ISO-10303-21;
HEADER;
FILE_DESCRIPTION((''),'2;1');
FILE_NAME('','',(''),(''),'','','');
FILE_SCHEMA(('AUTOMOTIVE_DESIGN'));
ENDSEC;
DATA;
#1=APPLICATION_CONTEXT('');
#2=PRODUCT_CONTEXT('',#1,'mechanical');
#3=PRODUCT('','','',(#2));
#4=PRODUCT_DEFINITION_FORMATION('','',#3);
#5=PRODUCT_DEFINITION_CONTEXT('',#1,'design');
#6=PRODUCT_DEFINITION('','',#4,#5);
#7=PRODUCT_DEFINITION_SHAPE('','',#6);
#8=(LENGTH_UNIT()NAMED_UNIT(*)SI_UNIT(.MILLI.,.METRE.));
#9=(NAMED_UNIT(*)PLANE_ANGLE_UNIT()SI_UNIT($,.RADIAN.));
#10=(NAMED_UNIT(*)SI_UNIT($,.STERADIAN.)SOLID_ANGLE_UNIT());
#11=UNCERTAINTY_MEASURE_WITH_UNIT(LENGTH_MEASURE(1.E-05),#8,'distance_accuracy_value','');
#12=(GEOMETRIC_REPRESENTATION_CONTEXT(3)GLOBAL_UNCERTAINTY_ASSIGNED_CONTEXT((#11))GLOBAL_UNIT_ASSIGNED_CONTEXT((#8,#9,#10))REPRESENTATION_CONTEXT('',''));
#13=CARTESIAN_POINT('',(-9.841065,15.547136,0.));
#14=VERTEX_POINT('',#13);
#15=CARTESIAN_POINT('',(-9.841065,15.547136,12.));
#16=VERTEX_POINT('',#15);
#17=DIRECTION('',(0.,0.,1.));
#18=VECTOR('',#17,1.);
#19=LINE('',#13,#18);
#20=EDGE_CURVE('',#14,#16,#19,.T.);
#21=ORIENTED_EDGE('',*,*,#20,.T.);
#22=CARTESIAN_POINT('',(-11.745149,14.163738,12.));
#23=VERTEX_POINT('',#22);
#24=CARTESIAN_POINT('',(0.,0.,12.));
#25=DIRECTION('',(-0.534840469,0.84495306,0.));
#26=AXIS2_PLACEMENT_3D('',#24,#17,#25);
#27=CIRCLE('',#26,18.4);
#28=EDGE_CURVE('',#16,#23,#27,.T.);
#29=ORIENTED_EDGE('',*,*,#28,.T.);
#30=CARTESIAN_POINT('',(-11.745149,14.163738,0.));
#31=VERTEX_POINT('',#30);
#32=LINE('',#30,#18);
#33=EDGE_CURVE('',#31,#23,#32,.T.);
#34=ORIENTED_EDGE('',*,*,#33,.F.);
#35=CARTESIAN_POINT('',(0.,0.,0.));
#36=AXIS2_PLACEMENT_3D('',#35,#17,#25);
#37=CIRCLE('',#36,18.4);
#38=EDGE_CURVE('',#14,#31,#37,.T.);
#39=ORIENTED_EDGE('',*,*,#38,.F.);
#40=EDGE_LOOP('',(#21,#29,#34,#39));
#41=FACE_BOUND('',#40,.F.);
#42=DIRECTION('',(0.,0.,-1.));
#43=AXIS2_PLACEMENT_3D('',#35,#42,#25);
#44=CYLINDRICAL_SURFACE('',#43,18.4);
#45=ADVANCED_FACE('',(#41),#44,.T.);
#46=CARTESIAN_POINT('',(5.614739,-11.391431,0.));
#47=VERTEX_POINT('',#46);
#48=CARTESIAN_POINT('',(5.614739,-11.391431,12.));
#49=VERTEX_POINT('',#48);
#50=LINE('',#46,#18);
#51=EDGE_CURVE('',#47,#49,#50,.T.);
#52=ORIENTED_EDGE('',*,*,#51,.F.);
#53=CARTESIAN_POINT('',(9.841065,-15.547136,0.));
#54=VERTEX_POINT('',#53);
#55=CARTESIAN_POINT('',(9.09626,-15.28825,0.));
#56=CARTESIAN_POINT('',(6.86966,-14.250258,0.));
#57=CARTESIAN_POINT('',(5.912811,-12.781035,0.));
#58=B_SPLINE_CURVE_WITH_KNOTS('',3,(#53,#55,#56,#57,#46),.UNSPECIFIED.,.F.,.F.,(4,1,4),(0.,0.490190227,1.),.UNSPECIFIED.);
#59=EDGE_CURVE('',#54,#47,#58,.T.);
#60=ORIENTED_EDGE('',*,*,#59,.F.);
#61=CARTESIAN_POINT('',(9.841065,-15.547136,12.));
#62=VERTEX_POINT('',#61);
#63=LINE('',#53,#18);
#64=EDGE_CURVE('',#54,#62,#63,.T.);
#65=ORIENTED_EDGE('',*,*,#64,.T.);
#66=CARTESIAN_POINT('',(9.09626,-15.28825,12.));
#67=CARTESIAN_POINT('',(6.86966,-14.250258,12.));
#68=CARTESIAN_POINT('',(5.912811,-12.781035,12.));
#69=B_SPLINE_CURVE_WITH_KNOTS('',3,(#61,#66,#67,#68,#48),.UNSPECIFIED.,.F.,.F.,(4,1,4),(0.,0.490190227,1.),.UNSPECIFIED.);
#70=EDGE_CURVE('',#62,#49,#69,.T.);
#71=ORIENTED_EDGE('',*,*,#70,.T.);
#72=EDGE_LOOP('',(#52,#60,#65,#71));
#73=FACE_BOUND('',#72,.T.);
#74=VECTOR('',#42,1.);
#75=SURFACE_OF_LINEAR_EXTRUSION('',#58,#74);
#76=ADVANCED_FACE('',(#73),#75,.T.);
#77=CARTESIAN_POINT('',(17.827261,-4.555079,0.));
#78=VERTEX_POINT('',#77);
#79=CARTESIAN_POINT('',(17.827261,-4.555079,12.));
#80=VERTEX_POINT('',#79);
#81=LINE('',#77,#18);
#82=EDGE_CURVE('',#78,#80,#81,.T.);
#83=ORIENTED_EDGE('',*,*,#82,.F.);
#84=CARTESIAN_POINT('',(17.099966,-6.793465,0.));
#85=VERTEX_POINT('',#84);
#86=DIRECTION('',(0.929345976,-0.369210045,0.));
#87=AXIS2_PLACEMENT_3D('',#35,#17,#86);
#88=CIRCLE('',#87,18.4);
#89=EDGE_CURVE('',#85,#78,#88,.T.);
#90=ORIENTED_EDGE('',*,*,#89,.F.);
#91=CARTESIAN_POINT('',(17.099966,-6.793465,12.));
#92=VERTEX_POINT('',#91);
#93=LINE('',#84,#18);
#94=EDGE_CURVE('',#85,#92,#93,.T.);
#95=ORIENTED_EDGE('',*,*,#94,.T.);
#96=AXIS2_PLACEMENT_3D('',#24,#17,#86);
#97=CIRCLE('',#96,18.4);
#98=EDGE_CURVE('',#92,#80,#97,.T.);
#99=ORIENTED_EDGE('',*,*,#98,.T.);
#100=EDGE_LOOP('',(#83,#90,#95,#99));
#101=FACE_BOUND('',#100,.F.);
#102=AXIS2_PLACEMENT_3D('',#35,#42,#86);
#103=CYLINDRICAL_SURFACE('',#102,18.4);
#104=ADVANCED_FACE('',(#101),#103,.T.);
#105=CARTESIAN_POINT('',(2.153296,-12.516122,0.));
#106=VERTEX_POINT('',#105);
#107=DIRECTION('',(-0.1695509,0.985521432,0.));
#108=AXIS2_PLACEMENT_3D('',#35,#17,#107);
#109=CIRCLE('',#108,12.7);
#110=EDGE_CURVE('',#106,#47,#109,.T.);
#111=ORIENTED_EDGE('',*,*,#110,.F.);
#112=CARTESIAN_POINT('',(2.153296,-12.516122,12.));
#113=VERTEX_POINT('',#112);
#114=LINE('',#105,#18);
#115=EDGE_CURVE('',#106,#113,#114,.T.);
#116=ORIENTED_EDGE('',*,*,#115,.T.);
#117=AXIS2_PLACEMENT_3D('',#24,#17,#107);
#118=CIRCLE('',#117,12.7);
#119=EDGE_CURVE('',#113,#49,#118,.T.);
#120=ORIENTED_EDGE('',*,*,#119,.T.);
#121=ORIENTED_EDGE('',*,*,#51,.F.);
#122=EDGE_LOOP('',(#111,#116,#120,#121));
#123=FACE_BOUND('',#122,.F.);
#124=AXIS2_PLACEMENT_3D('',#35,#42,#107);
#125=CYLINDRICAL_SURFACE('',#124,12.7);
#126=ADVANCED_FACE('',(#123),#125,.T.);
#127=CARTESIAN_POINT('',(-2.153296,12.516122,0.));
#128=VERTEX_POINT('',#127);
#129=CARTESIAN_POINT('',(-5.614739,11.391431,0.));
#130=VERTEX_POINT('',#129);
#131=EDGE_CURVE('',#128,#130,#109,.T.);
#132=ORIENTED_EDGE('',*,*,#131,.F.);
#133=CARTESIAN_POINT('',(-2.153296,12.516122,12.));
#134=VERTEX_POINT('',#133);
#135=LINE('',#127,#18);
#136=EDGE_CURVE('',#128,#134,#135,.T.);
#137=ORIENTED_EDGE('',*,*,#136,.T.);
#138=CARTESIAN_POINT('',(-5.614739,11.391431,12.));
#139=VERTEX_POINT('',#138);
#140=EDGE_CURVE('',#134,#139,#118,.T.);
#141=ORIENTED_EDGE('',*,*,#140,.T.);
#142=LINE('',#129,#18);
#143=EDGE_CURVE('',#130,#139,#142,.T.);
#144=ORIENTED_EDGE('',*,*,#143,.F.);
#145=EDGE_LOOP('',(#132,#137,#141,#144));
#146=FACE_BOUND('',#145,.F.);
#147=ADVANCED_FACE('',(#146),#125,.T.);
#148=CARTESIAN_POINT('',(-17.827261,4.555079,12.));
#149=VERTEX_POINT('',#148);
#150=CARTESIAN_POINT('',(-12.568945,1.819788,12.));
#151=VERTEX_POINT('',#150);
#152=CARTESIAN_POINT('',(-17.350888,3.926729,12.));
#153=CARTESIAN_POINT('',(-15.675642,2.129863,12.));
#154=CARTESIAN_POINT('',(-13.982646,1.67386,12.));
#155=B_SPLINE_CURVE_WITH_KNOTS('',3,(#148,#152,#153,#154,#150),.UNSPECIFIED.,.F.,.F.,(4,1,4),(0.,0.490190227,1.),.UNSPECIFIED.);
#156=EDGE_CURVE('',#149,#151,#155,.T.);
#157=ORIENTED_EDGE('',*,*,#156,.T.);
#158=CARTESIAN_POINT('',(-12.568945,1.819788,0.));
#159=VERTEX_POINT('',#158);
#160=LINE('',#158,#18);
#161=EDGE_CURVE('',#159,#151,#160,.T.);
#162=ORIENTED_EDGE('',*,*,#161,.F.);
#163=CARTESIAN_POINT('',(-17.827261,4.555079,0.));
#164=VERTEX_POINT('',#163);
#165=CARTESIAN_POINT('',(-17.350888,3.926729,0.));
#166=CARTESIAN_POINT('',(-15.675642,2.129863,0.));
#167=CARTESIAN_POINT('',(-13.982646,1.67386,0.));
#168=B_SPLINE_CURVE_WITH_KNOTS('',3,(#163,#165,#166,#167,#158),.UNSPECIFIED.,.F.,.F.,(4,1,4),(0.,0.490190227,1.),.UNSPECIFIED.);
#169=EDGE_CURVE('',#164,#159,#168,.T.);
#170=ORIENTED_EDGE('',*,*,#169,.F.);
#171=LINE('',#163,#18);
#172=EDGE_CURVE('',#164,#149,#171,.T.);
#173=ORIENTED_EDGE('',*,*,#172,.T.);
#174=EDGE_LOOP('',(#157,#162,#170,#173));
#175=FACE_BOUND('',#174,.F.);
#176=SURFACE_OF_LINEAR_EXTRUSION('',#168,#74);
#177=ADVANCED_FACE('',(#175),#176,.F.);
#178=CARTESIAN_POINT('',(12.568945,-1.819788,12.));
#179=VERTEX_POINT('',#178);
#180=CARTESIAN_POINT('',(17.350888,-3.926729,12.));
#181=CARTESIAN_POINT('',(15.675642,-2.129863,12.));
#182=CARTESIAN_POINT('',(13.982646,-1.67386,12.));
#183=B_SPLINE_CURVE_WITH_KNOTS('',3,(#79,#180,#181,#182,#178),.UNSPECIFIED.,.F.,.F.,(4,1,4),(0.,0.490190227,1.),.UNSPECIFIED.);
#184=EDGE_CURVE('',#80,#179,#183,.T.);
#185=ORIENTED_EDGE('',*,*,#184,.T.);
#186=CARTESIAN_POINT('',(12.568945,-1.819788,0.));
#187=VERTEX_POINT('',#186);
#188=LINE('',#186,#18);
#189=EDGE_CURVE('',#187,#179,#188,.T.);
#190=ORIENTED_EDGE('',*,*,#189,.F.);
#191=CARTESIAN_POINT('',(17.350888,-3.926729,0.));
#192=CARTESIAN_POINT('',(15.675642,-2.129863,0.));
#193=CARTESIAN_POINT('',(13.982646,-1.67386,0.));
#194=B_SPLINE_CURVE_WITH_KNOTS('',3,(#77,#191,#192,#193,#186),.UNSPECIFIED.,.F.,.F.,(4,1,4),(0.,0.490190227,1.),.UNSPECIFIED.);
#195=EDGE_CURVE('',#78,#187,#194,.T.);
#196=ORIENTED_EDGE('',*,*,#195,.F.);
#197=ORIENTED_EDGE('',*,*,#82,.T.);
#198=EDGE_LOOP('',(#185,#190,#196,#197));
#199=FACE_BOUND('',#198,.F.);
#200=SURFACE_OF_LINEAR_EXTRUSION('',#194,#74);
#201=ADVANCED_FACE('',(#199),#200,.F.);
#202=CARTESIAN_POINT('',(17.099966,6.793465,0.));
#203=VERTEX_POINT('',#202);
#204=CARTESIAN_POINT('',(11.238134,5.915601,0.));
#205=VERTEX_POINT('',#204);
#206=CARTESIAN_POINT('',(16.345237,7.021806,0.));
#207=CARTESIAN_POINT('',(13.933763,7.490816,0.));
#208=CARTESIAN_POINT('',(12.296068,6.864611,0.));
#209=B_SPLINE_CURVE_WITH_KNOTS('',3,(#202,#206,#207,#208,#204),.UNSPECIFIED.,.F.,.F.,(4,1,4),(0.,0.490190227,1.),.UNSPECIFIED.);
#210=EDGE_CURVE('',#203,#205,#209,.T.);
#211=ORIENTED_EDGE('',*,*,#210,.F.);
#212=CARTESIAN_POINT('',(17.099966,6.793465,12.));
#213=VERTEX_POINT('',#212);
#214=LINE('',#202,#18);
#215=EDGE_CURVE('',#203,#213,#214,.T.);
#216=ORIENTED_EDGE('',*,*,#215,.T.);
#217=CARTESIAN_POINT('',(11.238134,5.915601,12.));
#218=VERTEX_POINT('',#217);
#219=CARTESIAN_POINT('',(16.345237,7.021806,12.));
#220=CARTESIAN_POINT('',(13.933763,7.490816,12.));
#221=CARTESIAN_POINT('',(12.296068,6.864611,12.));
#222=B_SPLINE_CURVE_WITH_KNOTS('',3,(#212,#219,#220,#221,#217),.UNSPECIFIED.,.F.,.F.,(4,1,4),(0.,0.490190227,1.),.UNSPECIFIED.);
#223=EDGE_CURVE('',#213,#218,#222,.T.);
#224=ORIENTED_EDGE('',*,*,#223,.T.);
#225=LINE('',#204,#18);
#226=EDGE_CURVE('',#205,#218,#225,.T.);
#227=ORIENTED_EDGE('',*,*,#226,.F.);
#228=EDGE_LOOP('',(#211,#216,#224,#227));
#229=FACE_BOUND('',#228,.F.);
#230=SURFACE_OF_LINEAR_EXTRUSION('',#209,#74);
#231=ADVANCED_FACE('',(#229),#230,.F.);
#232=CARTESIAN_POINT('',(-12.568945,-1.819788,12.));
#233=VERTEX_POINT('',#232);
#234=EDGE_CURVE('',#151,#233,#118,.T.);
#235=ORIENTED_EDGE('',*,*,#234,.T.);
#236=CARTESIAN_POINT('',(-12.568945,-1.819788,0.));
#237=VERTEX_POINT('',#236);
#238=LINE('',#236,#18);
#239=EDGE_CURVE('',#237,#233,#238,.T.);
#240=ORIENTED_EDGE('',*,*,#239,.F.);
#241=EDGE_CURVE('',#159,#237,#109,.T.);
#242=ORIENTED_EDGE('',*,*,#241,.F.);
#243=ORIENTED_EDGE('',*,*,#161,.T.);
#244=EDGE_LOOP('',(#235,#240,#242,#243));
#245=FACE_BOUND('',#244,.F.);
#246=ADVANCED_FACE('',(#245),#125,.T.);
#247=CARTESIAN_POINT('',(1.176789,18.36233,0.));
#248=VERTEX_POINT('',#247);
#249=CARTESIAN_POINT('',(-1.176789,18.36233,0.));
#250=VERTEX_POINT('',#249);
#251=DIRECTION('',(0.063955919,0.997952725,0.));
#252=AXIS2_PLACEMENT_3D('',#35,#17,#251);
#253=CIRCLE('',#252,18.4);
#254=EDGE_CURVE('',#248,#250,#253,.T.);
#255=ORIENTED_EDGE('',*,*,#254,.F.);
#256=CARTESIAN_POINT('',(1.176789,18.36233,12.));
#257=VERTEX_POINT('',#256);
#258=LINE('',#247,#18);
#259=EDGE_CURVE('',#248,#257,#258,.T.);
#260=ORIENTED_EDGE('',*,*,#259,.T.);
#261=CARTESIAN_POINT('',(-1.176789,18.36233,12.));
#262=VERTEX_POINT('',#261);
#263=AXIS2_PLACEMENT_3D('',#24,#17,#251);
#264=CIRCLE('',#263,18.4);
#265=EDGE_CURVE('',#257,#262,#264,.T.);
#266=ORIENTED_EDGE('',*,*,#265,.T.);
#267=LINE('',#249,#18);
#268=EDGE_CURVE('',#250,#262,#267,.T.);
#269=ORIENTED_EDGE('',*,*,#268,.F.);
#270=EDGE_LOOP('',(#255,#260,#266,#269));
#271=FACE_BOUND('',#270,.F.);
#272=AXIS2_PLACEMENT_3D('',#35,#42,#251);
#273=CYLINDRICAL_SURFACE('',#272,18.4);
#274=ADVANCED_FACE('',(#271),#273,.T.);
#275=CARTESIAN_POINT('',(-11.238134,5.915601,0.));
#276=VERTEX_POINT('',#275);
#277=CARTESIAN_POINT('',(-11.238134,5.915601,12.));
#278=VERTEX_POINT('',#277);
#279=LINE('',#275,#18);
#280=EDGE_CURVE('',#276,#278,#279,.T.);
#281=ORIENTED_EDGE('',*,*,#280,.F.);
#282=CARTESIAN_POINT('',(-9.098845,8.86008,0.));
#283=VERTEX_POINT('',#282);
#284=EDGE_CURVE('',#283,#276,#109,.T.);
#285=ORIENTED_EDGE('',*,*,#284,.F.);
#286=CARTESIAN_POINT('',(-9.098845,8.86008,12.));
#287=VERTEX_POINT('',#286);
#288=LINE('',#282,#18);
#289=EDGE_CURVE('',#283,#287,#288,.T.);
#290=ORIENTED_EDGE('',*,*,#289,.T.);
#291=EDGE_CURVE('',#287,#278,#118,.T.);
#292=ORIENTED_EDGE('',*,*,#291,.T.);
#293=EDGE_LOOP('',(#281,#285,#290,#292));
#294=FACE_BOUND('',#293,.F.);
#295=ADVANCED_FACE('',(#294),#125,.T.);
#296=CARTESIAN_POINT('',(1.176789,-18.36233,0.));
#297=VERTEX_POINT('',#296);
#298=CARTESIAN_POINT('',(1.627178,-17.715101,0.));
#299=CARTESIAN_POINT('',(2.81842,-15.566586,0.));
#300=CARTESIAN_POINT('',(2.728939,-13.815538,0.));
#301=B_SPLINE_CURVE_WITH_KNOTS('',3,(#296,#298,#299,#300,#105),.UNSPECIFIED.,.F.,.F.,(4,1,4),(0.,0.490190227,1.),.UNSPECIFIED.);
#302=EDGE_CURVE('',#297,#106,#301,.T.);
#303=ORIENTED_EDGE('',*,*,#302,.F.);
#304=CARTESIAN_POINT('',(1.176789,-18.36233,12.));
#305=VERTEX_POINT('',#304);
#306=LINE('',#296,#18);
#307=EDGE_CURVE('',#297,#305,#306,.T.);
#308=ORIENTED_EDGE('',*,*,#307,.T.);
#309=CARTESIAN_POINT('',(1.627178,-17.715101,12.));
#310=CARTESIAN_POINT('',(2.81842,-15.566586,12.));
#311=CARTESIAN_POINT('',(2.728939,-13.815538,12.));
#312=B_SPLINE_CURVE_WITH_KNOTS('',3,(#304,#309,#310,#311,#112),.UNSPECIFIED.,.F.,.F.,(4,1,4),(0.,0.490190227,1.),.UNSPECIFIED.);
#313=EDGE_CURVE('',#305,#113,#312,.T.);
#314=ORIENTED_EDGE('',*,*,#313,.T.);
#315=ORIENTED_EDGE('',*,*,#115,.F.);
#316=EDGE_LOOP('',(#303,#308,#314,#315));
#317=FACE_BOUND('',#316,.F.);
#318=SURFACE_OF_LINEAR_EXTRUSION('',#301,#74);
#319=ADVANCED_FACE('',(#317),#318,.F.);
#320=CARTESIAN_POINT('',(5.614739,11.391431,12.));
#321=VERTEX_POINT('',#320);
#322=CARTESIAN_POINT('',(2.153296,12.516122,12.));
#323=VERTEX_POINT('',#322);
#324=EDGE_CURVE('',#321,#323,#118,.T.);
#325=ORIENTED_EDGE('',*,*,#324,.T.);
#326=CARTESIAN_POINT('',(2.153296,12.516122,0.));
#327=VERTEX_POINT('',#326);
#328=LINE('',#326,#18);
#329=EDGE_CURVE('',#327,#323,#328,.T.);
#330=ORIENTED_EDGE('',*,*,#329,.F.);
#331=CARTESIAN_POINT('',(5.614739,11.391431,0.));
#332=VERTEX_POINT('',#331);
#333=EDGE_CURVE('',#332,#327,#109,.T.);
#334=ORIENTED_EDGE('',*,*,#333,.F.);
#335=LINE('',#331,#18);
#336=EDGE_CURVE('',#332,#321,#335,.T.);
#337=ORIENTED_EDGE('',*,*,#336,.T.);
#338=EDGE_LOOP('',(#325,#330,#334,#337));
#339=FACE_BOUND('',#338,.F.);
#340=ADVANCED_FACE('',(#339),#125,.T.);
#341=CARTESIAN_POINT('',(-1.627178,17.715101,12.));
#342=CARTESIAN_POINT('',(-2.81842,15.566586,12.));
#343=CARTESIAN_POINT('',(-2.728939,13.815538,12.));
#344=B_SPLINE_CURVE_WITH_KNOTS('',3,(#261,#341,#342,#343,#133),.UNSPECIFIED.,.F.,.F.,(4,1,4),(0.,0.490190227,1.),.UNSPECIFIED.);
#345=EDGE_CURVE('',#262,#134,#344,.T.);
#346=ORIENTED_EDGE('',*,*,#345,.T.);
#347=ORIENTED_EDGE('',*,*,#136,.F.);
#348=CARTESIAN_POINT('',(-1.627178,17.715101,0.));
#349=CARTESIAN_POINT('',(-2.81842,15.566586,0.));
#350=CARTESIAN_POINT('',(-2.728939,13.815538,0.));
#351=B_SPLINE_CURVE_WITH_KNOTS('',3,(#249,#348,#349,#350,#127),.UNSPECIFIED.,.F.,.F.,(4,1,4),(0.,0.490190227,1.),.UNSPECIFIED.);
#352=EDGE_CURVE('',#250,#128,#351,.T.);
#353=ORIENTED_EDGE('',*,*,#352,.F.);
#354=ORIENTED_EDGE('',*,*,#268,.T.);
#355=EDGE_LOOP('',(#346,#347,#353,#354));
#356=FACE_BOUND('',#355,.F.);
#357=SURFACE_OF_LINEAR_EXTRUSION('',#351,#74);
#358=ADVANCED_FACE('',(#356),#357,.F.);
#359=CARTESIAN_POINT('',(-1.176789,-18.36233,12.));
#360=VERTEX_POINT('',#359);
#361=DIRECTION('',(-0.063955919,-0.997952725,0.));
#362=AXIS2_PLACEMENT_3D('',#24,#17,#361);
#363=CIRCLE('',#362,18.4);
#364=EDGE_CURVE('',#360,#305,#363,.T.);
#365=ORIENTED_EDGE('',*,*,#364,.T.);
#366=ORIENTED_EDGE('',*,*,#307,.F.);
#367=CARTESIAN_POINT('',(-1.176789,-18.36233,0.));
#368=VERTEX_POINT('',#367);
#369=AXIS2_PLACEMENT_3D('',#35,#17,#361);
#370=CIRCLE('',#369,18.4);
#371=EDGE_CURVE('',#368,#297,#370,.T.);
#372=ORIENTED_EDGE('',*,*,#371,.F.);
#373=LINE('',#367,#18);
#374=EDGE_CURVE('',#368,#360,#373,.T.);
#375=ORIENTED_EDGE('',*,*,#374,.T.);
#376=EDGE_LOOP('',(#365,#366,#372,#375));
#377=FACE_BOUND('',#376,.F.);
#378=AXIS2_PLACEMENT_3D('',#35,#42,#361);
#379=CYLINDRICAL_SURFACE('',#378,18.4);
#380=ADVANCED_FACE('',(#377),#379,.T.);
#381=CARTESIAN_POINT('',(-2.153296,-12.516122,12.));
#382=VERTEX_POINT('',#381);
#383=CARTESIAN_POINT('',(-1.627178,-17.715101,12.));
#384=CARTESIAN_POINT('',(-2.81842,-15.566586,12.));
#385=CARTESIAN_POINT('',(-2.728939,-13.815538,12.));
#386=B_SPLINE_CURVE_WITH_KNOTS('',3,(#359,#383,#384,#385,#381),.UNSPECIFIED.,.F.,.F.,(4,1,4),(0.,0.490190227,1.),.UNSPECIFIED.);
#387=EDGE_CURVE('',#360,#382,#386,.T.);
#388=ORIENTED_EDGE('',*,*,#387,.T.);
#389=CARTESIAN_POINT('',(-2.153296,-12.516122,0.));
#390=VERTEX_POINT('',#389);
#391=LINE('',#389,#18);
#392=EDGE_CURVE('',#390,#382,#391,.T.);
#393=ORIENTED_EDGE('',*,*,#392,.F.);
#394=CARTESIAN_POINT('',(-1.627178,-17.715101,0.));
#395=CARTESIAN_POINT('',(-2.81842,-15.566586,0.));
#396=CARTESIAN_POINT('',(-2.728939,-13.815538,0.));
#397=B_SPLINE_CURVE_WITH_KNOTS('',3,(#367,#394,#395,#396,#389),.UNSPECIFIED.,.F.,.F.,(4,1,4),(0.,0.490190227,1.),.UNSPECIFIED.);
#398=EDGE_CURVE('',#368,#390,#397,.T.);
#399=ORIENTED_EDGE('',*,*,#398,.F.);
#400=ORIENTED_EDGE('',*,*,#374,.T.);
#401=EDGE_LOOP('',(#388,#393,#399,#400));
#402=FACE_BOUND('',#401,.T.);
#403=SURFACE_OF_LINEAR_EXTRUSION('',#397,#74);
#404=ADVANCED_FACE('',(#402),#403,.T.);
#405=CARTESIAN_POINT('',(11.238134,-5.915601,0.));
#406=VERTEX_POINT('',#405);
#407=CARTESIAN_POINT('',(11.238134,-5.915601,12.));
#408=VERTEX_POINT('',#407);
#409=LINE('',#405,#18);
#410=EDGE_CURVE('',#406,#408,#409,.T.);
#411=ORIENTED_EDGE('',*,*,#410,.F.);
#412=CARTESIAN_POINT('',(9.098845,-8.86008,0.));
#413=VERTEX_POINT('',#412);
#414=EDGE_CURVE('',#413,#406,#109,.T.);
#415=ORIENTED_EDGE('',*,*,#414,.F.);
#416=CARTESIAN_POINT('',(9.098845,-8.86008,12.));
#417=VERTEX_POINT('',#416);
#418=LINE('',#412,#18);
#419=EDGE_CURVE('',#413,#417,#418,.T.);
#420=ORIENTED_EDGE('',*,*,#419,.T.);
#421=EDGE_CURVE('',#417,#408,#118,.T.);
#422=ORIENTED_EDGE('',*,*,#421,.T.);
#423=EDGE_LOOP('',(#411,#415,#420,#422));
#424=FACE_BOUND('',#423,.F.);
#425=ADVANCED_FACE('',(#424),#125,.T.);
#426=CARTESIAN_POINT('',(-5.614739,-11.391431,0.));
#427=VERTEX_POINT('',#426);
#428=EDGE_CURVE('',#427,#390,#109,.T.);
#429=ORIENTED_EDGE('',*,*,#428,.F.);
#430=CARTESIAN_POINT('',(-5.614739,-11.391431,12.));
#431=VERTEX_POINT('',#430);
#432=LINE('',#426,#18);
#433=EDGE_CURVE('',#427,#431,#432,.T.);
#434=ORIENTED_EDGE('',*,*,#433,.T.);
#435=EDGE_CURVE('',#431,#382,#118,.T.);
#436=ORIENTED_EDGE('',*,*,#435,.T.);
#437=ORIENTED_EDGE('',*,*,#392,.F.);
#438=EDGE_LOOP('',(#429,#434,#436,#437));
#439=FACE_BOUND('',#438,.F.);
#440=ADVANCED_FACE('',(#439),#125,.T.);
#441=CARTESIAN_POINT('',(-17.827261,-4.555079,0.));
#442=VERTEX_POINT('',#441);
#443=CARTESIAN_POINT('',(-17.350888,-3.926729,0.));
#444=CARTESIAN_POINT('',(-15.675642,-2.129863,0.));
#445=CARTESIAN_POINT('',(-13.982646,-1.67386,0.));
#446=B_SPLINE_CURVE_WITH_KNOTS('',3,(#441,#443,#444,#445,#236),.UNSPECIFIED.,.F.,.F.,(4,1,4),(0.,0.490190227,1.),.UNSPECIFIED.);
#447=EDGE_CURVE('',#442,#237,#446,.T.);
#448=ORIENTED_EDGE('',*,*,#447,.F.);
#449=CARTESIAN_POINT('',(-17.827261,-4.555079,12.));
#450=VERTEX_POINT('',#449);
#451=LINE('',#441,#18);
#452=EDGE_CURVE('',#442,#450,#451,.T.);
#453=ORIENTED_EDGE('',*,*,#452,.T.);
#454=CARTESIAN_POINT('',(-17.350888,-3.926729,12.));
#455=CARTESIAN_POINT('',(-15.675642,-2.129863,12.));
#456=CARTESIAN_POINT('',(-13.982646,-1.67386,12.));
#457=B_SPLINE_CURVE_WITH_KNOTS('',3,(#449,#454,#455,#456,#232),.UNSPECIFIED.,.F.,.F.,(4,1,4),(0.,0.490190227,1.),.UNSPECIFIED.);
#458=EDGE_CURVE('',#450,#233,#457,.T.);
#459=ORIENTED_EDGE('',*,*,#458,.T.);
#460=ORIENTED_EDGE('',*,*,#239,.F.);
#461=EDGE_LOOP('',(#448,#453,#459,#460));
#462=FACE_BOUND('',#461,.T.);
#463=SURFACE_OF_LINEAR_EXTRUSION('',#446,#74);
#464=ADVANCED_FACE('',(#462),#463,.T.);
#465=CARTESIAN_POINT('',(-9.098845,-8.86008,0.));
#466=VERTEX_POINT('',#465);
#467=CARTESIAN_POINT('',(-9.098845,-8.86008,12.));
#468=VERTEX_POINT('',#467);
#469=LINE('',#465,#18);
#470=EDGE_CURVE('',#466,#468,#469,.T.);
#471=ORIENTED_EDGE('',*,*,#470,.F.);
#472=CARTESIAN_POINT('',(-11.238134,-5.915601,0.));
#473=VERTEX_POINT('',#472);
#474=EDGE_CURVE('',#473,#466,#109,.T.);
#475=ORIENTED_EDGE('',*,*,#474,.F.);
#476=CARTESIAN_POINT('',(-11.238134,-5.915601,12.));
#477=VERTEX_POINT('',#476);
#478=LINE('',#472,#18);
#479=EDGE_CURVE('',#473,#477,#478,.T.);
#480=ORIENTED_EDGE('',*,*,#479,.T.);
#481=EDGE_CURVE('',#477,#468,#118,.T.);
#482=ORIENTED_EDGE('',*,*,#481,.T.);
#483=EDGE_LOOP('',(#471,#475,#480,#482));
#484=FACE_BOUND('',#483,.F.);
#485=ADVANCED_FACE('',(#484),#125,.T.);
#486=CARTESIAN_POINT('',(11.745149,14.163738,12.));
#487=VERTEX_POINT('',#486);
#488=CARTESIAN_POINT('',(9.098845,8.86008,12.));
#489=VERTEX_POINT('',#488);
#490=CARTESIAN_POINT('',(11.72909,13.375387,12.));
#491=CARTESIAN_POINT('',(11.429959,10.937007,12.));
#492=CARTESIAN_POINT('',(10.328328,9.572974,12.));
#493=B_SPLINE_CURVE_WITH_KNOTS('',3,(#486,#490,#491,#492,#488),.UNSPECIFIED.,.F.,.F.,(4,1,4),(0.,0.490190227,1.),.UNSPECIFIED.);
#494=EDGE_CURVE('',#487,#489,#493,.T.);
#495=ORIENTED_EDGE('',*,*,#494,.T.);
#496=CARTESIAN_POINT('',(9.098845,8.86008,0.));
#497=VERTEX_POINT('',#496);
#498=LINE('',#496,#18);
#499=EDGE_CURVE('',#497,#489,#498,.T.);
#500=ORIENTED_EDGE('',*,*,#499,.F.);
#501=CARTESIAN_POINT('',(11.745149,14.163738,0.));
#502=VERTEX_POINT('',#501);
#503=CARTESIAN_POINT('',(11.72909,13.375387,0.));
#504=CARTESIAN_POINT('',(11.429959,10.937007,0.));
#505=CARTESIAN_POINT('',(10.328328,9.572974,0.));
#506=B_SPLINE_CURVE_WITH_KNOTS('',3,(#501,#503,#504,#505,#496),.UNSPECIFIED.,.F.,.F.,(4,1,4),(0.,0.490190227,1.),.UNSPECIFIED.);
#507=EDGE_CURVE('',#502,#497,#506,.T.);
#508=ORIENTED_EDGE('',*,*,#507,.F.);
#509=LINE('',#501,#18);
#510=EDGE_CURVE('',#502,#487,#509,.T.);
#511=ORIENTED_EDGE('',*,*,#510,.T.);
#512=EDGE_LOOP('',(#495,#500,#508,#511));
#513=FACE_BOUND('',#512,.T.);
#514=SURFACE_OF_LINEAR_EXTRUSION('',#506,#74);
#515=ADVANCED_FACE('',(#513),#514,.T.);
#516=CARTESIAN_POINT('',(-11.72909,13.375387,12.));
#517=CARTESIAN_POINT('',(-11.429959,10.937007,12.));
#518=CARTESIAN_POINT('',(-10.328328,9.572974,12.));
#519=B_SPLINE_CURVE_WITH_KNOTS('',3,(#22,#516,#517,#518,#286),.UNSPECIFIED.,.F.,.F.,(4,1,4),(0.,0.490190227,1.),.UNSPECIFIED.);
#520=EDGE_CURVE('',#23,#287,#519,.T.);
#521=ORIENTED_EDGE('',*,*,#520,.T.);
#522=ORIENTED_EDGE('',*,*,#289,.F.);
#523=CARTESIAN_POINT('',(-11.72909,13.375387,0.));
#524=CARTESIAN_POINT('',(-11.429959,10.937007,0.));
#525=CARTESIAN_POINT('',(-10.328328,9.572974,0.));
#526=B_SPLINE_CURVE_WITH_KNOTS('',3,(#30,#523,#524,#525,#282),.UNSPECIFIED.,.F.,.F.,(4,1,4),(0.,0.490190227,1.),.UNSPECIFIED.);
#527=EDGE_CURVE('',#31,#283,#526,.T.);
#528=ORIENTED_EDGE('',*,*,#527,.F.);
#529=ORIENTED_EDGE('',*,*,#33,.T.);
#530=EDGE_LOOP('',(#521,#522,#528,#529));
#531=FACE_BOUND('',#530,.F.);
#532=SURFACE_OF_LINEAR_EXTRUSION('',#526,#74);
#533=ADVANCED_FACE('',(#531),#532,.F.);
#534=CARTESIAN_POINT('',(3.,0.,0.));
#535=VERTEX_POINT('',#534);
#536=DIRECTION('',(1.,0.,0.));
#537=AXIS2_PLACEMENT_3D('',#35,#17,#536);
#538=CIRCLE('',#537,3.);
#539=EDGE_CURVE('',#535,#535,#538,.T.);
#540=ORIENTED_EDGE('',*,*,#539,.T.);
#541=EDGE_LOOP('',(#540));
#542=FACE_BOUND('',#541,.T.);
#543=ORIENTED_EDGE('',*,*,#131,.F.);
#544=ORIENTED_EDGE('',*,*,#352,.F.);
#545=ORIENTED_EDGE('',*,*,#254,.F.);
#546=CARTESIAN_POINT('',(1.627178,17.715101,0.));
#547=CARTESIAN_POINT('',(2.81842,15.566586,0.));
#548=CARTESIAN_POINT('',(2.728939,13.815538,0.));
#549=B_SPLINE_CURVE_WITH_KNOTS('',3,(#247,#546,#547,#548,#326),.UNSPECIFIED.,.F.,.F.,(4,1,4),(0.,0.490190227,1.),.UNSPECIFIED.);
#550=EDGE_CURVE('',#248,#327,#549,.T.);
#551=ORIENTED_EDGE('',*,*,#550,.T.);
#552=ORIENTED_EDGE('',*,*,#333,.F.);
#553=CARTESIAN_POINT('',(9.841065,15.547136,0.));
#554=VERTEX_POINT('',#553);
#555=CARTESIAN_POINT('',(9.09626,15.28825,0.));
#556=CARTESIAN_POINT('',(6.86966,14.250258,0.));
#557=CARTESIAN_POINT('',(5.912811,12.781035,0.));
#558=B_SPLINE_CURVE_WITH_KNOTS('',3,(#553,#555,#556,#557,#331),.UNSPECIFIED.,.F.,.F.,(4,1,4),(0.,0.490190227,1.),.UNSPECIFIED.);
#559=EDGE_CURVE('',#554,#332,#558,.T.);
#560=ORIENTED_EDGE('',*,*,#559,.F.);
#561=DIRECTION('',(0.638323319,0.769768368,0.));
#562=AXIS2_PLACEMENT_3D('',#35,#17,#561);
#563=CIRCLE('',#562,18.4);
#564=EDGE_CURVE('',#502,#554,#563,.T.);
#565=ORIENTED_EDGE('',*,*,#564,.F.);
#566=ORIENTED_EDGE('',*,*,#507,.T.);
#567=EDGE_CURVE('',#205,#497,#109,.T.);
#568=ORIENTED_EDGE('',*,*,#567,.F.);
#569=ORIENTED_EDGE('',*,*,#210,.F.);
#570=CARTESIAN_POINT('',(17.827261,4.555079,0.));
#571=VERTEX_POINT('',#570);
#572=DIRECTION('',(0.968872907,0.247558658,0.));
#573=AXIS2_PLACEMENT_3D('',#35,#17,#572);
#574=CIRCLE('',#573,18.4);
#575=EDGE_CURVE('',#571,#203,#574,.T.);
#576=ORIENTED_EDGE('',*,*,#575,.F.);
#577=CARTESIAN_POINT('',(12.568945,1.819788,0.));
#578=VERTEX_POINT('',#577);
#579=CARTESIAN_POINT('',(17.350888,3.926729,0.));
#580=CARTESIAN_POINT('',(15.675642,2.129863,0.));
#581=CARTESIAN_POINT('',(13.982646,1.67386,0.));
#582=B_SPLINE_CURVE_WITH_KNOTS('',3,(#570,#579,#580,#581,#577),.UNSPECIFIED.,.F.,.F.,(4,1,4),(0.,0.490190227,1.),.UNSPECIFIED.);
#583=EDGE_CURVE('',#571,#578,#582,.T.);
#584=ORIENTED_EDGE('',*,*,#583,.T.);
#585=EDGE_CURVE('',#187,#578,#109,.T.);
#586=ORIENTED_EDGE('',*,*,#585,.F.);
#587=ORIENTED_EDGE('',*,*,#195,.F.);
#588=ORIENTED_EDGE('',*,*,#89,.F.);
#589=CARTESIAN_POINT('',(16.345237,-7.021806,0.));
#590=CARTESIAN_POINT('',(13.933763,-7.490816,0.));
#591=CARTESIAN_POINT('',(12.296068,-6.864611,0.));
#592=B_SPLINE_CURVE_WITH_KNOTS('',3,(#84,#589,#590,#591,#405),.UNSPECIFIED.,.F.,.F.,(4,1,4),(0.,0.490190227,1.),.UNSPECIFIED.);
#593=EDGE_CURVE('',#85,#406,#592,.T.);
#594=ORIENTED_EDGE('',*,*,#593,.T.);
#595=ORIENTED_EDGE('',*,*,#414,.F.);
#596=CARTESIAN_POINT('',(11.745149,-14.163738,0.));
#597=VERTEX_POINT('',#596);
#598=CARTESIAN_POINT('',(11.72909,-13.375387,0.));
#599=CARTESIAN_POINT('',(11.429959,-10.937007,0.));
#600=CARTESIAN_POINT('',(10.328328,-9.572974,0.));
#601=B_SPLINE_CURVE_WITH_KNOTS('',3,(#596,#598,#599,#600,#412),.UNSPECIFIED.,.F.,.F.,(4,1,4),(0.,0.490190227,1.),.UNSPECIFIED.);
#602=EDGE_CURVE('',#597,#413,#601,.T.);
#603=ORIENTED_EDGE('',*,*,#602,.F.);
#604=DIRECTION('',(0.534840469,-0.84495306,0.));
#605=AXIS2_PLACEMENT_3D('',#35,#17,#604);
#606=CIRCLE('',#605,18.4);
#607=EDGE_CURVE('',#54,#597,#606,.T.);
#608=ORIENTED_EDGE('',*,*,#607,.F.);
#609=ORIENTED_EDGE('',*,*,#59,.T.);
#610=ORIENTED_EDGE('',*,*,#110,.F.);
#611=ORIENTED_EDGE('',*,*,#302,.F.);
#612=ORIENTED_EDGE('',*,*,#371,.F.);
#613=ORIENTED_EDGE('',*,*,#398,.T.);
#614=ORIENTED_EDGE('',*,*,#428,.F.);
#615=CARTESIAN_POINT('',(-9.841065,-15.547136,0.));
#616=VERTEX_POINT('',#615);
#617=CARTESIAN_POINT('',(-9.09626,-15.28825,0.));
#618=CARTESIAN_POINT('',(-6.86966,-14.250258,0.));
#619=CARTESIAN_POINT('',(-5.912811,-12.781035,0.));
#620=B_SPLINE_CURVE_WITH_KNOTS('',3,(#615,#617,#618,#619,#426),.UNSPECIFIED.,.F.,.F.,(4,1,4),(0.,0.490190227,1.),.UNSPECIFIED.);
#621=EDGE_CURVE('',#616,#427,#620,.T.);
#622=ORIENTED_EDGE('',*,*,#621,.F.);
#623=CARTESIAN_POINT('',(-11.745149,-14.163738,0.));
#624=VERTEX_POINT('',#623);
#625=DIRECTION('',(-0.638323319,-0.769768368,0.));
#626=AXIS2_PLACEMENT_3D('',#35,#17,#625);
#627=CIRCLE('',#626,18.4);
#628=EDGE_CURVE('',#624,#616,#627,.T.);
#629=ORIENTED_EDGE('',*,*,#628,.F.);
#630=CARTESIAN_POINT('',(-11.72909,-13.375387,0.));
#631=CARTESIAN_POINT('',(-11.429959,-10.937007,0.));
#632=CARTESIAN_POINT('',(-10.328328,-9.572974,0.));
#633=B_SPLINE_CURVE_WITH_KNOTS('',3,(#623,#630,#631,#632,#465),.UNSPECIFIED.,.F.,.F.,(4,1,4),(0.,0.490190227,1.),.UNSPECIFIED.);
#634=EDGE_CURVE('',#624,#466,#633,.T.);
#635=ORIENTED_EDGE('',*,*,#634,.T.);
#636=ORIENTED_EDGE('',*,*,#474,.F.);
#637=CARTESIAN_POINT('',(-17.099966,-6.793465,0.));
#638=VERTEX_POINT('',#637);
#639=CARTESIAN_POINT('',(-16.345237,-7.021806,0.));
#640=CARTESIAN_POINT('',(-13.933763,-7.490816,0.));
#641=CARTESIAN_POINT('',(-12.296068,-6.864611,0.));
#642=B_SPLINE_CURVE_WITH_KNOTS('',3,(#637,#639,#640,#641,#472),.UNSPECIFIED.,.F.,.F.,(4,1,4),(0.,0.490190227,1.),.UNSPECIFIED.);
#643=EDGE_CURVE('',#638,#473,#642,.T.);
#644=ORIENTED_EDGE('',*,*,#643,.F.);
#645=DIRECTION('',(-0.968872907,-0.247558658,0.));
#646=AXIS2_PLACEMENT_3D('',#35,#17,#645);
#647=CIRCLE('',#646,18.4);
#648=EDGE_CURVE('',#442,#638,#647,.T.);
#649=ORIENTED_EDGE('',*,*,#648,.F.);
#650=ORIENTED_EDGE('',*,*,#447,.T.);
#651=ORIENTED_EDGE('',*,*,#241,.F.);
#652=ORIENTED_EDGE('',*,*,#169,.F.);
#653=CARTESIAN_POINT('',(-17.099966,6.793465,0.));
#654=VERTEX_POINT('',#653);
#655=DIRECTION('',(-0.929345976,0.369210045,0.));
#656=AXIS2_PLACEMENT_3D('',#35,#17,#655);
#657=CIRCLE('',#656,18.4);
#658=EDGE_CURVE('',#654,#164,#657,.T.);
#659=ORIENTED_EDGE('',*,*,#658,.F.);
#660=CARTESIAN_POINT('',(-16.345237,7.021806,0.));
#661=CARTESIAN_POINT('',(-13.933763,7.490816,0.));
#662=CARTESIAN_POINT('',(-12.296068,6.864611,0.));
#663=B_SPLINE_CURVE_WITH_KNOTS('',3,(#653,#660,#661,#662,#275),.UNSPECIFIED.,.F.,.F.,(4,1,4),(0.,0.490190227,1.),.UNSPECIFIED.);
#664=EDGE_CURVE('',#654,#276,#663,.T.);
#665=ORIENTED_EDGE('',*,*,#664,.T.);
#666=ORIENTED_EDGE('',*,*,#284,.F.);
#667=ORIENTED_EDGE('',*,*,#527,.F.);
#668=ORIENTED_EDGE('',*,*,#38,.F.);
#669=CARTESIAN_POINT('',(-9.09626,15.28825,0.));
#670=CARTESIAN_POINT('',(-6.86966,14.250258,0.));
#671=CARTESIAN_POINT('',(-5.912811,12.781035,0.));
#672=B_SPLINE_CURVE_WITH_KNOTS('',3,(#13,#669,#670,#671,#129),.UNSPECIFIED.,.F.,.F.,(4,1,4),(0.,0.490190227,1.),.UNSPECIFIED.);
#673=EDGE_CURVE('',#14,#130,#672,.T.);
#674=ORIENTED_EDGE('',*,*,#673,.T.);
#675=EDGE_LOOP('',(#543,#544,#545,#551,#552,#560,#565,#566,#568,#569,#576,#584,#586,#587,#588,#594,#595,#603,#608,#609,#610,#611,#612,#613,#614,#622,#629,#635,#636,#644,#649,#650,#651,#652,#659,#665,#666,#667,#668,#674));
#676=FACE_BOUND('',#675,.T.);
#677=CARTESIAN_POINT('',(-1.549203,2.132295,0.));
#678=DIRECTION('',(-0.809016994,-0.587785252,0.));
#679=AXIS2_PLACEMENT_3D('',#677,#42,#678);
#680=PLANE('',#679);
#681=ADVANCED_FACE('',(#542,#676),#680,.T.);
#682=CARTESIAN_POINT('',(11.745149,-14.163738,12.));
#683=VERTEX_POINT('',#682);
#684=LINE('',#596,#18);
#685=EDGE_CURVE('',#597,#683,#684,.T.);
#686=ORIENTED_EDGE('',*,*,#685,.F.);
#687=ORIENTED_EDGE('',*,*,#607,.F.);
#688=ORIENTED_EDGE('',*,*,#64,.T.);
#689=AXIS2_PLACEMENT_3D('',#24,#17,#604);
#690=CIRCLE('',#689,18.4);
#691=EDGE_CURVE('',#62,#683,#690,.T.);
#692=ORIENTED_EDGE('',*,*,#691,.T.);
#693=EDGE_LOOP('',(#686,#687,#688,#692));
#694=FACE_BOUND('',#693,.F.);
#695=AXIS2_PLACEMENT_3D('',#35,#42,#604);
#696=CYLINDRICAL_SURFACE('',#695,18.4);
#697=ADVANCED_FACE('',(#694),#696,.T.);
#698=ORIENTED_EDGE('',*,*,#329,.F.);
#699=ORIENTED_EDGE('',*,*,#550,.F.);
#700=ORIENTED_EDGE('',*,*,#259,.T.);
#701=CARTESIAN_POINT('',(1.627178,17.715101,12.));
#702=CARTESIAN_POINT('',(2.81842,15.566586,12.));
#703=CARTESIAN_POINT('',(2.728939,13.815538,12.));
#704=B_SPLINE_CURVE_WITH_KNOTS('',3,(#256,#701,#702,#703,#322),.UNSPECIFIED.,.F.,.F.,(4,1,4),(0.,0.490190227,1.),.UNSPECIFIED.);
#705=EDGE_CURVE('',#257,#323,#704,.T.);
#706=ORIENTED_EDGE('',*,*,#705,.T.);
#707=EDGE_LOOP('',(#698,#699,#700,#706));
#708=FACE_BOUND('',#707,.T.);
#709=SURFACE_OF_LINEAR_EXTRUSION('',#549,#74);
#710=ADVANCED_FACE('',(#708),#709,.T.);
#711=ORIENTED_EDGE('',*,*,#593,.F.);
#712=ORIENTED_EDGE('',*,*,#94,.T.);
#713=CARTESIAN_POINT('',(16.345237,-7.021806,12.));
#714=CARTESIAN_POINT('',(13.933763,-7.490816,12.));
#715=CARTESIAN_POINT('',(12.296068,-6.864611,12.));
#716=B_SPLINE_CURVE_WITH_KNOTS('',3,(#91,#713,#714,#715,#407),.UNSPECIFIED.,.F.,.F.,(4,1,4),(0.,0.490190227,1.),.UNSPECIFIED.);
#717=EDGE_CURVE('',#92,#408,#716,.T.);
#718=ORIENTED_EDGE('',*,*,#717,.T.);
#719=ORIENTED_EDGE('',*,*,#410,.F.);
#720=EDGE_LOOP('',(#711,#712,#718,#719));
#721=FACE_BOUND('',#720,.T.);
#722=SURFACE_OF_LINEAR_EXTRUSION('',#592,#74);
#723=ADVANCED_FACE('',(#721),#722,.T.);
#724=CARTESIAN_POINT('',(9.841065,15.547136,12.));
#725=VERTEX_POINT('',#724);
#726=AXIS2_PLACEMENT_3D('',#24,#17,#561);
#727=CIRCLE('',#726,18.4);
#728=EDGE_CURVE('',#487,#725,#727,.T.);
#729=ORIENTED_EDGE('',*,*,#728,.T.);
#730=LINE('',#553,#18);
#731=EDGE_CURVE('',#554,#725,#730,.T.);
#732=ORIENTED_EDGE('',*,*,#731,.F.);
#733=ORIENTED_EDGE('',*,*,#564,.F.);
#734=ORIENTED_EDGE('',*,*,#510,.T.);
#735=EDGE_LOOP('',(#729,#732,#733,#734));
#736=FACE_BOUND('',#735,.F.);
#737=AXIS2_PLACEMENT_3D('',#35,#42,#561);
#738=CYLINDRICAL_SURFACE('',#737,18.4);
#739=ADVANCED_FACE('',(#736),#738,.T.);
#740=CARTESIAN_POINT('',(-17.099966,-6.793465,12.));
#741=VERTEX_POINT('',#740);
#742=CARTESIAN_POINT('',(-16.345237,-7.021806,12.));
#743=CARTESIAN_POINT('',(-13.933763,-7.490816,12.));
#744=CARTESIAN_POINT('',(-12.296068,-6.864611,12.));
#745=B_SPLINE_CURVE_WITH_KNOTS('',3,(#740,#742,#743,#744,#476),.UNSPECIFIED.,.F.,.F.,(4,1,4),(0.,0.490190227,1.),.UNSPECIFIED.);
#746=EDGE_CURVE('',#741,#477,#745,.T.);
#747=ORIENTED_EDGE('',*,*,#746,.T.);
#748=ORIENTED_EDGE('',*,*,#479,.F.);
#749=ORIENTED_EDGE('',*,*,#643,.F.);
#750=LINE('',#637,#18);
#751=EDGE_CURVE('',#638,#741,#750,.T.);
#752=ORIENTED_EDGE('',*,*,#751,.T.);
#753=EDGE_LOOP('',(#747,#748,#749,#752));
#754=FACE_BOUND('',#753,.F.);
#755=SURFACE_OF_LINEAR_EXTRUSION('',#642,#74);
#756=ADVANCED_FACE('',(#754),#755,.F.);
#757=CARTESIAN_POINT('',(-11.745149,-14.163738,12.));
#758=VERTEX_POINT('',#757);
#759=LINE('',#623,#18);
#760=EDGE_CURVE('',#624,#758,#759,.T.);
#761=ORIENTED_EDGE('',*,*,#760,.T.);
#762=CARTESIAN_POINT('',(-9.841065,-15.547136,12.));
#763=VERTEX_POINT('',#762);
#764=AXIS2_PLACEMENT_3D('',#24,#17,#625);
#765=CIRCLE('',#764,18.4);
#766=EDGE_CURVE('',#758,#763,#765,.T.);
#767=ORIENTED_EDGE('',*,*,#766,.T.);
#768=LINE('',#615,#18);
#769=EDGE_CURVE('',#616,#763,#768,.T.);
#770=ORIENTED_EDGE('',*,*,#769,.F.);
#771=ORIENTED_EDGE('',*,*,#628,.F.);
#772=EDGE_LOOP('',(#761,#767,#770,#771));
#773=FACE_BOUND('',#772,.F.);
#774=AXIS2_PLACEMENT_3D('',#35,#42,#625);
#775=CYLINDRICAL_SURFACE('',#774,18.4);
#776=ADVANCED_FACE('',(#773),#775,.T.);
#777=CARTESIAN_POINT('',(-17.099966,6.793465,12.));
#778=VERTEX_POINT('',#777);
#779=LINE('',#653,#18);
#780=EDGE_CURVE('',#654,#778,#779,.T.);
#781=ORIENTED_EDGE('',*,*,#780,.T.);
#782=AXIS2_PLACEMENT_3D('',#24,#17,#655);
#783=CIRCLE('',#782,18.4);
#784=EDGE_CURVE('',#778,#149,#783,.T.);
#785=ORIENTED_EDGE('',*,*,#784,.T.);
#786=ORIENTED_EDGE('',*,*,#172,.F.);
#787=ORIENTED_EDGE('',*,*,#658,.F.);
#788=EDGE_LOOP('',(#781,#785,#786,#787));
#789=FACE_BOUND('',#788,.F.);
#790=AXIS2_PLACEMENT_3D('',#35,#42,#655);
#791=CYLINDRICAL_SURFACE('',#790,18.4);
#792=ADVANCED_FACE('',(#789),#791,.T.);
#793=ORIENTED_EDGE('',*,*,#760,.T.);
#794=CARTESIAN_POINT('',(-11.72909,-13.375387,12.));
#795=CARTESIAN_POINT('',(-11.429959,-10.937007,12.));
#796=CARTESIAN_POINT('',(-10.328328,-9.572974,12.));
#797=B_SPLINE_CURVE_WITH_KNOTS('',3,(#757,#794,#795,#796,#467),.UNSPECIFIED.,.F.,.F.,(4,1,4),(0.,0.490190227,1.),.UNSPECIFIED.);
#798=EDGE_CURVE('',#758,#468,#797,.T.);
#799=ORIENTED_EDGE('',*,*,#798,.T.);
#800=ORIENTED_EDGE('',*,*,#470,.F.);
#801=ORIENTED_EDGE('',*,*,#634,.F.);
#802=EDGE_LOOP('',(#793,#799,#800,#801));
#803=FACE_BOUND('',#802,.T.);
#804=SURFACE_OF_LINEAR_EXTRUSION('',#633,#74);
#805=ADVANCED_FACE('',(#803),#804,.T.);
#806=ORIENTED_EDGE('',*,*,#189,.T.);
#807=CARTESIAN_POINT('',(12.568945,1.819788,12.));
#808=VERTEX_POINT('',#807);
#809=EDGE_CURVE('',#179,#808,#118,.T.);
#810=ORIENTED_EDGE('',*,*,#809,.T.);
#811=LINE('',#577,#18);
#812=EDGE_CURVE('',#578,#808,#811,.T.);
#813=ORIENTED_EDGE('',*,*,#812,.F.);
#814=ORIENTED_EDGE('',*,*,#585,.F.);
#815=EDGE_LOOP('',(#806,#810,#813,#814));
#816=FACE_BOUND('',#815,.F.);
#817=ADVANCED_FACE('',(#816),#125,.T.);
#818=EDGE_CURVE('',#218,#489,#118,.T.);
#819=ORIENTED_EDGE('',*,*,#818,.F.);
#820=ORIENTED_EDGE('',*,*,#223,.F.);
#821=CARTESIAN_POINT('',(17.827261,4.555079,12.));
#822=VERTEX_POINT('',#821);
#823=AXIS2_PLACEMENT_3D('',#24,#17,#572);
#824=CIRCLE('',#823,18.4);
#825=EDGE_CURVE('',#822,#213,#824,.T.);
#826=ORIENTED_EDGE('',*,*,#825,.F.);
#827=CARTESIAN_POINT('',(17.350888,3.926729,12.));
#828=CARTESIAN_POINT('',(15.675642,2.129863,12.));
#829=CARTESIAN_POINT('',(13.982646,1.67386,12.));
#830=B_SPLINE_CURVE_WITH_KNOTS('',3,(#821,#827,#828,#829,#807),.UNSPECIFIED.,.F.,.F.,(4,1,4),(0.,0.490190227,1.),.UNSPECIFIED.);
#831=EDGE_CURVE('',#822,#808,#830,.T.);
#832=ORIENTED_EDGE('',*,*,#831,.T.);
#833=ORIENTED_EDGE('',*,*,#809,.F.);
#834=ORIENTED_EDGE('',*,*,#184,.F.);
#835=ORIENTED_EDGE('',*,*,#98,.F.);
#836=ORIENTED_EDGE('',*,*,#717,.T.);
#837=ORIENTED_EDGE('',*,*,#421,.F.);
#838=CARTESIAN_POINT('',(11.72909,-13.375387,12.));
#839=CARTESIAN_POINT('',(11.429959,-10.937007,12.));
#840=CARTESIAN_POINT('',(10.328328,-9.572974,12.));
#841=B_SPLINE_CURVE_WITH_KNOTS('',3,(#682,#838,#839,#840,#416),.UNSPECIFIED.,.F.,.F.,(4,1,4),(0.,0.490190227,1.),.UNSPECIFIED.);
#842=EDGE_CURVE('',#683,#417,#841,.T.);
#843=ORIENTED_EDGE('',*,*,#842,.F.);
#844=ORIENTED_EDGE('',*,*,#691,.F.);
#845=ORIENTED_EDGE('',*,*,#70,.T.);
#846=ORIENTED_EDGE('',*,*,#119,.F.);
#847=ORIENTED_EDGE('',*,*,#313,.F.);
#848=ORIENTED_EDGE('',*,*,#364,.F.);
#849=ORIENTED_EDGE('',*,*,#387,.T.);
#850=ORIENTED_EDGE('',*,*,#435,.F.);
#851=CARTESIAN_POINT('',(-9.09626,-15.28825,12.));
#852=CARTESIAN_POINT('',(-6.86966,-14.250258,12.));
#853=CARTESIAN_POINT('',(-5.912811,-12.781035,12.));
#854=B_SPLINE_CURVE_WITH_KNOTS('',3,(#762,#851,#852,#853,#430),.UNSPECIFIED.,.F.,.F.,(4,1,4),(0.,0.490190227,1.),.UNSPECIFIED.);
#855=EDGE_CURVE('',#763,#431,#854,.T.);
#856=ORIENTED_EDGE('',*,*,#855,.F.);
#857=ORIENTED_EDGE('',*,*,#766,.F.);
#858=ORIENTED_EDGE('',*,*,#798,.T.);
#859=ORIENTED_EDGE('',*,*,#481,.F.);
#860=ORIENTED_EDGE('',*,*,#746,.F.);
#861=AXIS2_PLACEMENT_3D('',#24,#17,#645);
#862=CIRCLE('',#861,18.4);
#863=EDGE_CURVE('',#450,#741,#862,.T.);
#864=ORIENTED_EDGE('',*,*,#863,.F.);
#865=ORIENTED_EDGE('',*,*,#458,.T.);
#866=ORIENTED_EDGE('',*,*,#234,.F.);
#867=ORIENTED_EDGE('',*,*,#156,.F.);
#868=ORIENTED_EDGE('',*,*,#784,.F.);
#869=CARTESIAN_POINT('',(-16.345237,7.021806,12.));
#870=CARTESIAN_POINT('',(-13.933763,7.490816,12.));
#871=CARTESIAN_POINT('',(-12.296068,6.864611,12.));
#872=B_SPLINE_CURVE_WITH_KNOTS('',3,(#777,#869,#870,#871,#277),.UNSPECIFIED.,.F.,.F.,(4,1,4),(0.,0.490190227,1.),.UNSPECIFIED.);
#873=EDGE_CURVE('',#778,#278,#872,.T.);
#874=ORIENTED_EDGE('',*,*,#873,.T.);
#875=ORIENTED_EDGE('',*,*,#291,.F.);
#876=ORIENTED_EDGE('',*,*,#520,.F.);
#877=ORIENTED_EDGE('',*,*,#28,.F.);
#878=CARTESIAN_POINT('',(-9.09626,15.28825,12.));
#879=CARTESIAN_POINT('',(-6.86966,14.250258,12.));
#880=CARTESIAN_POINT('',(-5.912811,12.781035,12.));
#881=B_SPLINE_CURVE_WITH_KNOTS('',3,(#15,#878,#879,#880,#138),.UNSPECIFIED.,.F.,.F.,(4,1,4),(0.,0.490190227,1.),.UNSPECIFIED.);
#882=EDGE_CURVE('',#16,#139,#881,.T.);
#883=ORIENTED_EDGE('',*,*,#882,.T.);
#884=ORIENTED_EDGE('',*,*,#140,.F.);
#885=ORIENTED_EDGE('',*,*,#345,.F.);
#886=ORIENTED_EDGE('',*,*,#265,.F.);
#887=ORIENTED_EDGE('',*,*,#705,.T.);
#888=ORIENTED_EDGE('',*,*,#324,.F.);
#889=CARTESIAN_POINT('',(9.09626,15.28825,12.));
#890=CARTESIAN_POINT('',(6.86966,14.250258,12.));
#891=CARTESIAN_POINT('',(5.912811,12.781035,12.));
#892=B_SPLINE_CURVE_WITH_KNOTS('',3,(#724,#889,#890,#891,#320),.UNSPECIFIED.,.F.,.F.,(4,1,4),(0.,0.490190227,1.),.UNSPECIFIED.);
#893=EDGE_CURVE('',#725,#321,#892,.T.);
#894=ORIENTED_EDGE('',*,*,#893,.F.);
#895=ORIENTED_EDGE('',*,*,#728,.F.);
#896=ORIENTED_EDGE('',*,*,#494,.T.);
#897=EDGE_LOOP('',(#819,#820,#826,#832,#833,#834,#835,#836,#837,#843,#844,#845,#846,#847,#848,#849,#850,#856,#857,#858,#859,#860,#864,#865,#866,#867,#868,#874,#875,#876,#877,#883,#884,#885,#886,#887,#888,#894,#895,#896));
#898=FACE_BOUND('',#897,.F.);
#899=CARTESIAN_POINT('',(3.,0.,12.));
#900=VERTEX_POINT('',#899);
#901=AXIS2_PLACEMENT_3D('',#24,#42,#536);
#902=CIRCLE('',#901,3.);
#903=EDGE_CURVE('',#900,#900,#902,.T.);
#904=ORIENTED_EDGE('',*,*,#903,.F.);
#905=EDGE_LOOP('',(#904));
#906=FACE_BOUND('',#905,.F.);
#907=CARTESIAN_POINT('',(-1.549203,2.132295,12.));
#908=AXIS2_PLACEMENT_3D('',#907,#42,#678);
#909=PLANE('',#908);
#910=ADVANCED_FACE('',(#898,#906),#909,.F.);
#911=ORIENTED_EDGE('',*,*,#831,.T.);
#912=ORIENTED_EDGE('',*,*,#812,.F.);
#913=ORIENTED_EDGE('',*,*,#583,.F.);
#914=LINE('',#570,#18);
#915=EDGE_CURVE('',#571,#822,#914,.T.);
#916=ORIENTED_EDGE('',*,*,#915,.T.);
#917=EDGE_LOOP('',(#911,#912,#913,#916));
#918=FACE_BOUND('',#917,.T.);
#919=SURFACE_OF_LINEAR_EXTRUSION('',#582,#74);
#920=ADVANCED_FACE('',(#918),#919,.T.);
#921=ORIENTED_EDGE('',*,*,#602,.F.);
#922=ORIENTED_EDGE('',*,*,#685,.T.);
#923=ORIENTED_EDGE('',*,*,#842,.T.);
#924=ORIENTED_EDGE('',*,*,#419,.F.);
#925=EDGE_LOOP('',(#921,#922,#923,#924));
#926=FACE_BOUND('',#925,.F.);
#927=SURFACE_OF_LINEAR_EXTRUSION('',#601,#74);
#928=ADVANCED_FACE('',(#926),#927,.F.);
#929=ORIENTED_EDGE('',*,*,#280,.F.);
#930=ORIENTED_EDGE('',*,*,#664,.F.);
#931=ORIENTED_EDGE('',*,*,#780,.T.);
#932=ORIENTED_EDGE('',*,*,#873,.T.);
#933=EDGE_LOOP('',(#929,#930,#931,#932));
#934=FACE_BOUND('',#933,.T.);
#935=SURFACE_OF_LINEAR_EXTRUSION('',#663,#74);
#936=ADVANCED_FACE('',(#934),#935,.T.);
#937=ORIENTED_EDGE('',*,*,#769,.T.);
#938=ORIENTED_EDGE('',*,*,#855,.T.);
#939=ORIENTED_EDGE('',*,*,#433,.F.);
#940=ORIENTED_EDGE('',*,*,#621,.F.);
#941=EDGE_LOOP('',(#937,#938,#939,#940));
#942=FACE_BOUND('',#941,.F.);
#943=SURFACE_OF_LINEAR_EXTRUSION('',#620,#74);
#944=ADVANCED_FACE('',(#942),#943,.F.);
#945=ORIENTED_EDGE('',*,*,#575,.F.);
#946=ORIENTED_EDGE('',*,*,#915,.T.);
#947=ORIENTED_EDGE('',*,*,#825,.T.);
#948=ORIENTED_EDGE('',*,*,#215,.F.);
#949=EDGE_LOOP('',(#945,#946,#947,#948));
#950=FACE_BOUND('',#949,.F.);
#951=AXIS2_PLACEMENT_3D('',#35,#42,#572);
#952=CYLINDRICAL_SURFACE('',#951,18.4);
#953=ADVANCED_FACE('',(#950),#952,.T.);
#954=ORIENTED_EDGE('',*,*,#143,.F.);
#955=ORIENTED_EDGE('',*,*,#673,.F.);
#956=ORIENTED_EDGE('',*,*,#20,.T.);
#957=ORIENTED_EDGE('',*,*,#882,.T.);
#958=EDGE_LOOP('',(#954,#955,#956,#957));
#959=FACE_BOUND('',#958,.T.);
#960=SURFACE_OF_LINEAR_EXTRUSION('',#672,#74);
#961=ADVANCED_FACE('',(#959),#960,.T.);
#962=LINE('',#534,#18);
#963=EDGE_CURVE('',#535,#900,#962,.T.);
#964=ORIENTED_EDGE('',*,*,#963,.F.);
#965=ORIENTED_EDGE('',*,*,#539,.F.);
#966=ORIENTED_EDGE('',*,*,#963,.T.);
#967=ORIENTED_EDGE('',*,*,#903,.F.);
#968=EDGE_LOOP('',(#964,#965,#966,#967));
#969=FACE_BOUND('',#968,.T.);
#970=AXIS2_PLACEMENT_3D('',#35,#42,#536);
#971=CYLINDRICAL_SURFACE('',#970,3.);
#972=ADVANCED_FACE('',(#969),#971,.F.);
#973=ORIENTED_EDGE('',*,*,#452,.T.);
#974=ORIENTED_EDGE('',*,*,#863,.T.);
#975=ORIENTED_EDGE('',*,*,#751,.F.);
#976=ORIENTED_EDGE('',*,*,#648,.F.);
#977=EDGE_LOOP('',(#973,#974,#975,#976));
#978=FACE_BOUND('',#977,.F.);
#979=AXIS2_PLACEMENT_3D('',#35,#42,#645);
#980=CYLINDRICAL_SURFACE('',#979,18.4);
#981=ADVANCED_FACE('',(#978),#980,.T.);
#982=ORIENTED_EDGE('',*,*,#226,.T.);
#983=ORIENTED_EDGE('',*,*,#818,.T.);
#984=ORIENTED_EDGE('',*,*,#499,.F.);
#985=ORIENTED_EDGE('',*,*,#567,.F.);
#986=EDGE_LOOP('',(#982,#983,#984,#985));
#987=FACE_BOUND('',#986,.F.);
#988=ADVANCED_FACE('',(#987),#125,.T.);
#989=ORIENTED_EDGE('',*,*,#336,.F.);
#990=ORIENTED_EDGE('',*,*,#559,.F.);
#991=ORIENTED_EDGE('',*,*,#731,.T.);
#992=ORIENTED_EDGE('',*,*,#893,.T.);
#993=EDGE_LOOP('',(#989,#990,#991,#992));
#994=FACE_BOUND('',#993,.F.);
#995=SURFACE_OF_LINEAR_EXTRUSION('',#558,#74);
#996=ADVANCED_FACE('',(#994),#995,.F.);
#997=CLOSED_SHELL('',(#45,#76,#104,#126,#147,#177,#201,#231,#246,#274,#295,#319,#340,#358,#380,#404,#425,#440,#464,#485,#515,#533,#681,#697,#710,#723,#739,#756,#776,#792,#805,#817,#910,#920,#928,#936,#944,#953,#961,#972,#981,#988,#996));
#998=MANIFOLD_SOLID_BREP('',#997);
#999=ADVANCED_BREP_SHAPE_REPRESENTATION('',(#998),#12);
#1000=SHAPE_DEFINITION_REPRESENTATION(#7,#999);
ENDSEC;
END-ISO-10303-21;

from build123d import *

# Parameters (mm, degrees)
F1_R     = 3
F2_DEPTH = 12
F3_COUNT = 10


# Not quite as in the source:
# - the dataset's text gives a spline's control points without its knots; the knots are read off the source's solid


with BuildPart() as f2:
    # F1 (on Top) → F2 (new body)
    with BuildSketch(Plane.XY):
        with BuildLine():
            add(Edge.make_bspline(
                [(1.1767889059, 18.3623301318), (1.6271784454, 17.7151013205), (2.818419618, 15.5665856482), (2.7289393763, 13.8155375104), (2.1532964325, 12.516122182)],
                knots=[0, 0, 0, 0, 0.4901902273, 1, 1, 1, 1], degree=3))
            ThreePointArc((1.1767889059, 18.3623301318), (0, 18.4), (-1.1767889059, 18.3623301318))
            add(Edge.make_bspline(
                [(-1.1767889059, 18.3623301318), (-1.6271784454, 17.7151013205), (-2.818419618, 15.5665856482), (-2.7289393763, 13.8155375104), (-2.1532964325, 12.516122182)],
                knots=[0, 0, 0, 0, 0.4901902273, 1, 1, 1, 1], degree=3))
            ThreePointArc((-2.1532964325, 12.516122182), (0, -12.7), (2.1532964325, 12.516122182))
        make_face()
        Circle(F1_R, mode=Mode.SUBTRACT)
    extrude(amount=F2_DEPTH)

    # F3: F2 ×10 about axis
    f3_axis = Axis((0, 0, 0), (0, 0, -1))


with BuildPart() as f2_1:
    add(f2.part)
    for i in range(1, F3_COUNT):
        add(f2.part.rotate(f3_axis, i * 360 / F3_COUNT))


solid = f2_1.part
